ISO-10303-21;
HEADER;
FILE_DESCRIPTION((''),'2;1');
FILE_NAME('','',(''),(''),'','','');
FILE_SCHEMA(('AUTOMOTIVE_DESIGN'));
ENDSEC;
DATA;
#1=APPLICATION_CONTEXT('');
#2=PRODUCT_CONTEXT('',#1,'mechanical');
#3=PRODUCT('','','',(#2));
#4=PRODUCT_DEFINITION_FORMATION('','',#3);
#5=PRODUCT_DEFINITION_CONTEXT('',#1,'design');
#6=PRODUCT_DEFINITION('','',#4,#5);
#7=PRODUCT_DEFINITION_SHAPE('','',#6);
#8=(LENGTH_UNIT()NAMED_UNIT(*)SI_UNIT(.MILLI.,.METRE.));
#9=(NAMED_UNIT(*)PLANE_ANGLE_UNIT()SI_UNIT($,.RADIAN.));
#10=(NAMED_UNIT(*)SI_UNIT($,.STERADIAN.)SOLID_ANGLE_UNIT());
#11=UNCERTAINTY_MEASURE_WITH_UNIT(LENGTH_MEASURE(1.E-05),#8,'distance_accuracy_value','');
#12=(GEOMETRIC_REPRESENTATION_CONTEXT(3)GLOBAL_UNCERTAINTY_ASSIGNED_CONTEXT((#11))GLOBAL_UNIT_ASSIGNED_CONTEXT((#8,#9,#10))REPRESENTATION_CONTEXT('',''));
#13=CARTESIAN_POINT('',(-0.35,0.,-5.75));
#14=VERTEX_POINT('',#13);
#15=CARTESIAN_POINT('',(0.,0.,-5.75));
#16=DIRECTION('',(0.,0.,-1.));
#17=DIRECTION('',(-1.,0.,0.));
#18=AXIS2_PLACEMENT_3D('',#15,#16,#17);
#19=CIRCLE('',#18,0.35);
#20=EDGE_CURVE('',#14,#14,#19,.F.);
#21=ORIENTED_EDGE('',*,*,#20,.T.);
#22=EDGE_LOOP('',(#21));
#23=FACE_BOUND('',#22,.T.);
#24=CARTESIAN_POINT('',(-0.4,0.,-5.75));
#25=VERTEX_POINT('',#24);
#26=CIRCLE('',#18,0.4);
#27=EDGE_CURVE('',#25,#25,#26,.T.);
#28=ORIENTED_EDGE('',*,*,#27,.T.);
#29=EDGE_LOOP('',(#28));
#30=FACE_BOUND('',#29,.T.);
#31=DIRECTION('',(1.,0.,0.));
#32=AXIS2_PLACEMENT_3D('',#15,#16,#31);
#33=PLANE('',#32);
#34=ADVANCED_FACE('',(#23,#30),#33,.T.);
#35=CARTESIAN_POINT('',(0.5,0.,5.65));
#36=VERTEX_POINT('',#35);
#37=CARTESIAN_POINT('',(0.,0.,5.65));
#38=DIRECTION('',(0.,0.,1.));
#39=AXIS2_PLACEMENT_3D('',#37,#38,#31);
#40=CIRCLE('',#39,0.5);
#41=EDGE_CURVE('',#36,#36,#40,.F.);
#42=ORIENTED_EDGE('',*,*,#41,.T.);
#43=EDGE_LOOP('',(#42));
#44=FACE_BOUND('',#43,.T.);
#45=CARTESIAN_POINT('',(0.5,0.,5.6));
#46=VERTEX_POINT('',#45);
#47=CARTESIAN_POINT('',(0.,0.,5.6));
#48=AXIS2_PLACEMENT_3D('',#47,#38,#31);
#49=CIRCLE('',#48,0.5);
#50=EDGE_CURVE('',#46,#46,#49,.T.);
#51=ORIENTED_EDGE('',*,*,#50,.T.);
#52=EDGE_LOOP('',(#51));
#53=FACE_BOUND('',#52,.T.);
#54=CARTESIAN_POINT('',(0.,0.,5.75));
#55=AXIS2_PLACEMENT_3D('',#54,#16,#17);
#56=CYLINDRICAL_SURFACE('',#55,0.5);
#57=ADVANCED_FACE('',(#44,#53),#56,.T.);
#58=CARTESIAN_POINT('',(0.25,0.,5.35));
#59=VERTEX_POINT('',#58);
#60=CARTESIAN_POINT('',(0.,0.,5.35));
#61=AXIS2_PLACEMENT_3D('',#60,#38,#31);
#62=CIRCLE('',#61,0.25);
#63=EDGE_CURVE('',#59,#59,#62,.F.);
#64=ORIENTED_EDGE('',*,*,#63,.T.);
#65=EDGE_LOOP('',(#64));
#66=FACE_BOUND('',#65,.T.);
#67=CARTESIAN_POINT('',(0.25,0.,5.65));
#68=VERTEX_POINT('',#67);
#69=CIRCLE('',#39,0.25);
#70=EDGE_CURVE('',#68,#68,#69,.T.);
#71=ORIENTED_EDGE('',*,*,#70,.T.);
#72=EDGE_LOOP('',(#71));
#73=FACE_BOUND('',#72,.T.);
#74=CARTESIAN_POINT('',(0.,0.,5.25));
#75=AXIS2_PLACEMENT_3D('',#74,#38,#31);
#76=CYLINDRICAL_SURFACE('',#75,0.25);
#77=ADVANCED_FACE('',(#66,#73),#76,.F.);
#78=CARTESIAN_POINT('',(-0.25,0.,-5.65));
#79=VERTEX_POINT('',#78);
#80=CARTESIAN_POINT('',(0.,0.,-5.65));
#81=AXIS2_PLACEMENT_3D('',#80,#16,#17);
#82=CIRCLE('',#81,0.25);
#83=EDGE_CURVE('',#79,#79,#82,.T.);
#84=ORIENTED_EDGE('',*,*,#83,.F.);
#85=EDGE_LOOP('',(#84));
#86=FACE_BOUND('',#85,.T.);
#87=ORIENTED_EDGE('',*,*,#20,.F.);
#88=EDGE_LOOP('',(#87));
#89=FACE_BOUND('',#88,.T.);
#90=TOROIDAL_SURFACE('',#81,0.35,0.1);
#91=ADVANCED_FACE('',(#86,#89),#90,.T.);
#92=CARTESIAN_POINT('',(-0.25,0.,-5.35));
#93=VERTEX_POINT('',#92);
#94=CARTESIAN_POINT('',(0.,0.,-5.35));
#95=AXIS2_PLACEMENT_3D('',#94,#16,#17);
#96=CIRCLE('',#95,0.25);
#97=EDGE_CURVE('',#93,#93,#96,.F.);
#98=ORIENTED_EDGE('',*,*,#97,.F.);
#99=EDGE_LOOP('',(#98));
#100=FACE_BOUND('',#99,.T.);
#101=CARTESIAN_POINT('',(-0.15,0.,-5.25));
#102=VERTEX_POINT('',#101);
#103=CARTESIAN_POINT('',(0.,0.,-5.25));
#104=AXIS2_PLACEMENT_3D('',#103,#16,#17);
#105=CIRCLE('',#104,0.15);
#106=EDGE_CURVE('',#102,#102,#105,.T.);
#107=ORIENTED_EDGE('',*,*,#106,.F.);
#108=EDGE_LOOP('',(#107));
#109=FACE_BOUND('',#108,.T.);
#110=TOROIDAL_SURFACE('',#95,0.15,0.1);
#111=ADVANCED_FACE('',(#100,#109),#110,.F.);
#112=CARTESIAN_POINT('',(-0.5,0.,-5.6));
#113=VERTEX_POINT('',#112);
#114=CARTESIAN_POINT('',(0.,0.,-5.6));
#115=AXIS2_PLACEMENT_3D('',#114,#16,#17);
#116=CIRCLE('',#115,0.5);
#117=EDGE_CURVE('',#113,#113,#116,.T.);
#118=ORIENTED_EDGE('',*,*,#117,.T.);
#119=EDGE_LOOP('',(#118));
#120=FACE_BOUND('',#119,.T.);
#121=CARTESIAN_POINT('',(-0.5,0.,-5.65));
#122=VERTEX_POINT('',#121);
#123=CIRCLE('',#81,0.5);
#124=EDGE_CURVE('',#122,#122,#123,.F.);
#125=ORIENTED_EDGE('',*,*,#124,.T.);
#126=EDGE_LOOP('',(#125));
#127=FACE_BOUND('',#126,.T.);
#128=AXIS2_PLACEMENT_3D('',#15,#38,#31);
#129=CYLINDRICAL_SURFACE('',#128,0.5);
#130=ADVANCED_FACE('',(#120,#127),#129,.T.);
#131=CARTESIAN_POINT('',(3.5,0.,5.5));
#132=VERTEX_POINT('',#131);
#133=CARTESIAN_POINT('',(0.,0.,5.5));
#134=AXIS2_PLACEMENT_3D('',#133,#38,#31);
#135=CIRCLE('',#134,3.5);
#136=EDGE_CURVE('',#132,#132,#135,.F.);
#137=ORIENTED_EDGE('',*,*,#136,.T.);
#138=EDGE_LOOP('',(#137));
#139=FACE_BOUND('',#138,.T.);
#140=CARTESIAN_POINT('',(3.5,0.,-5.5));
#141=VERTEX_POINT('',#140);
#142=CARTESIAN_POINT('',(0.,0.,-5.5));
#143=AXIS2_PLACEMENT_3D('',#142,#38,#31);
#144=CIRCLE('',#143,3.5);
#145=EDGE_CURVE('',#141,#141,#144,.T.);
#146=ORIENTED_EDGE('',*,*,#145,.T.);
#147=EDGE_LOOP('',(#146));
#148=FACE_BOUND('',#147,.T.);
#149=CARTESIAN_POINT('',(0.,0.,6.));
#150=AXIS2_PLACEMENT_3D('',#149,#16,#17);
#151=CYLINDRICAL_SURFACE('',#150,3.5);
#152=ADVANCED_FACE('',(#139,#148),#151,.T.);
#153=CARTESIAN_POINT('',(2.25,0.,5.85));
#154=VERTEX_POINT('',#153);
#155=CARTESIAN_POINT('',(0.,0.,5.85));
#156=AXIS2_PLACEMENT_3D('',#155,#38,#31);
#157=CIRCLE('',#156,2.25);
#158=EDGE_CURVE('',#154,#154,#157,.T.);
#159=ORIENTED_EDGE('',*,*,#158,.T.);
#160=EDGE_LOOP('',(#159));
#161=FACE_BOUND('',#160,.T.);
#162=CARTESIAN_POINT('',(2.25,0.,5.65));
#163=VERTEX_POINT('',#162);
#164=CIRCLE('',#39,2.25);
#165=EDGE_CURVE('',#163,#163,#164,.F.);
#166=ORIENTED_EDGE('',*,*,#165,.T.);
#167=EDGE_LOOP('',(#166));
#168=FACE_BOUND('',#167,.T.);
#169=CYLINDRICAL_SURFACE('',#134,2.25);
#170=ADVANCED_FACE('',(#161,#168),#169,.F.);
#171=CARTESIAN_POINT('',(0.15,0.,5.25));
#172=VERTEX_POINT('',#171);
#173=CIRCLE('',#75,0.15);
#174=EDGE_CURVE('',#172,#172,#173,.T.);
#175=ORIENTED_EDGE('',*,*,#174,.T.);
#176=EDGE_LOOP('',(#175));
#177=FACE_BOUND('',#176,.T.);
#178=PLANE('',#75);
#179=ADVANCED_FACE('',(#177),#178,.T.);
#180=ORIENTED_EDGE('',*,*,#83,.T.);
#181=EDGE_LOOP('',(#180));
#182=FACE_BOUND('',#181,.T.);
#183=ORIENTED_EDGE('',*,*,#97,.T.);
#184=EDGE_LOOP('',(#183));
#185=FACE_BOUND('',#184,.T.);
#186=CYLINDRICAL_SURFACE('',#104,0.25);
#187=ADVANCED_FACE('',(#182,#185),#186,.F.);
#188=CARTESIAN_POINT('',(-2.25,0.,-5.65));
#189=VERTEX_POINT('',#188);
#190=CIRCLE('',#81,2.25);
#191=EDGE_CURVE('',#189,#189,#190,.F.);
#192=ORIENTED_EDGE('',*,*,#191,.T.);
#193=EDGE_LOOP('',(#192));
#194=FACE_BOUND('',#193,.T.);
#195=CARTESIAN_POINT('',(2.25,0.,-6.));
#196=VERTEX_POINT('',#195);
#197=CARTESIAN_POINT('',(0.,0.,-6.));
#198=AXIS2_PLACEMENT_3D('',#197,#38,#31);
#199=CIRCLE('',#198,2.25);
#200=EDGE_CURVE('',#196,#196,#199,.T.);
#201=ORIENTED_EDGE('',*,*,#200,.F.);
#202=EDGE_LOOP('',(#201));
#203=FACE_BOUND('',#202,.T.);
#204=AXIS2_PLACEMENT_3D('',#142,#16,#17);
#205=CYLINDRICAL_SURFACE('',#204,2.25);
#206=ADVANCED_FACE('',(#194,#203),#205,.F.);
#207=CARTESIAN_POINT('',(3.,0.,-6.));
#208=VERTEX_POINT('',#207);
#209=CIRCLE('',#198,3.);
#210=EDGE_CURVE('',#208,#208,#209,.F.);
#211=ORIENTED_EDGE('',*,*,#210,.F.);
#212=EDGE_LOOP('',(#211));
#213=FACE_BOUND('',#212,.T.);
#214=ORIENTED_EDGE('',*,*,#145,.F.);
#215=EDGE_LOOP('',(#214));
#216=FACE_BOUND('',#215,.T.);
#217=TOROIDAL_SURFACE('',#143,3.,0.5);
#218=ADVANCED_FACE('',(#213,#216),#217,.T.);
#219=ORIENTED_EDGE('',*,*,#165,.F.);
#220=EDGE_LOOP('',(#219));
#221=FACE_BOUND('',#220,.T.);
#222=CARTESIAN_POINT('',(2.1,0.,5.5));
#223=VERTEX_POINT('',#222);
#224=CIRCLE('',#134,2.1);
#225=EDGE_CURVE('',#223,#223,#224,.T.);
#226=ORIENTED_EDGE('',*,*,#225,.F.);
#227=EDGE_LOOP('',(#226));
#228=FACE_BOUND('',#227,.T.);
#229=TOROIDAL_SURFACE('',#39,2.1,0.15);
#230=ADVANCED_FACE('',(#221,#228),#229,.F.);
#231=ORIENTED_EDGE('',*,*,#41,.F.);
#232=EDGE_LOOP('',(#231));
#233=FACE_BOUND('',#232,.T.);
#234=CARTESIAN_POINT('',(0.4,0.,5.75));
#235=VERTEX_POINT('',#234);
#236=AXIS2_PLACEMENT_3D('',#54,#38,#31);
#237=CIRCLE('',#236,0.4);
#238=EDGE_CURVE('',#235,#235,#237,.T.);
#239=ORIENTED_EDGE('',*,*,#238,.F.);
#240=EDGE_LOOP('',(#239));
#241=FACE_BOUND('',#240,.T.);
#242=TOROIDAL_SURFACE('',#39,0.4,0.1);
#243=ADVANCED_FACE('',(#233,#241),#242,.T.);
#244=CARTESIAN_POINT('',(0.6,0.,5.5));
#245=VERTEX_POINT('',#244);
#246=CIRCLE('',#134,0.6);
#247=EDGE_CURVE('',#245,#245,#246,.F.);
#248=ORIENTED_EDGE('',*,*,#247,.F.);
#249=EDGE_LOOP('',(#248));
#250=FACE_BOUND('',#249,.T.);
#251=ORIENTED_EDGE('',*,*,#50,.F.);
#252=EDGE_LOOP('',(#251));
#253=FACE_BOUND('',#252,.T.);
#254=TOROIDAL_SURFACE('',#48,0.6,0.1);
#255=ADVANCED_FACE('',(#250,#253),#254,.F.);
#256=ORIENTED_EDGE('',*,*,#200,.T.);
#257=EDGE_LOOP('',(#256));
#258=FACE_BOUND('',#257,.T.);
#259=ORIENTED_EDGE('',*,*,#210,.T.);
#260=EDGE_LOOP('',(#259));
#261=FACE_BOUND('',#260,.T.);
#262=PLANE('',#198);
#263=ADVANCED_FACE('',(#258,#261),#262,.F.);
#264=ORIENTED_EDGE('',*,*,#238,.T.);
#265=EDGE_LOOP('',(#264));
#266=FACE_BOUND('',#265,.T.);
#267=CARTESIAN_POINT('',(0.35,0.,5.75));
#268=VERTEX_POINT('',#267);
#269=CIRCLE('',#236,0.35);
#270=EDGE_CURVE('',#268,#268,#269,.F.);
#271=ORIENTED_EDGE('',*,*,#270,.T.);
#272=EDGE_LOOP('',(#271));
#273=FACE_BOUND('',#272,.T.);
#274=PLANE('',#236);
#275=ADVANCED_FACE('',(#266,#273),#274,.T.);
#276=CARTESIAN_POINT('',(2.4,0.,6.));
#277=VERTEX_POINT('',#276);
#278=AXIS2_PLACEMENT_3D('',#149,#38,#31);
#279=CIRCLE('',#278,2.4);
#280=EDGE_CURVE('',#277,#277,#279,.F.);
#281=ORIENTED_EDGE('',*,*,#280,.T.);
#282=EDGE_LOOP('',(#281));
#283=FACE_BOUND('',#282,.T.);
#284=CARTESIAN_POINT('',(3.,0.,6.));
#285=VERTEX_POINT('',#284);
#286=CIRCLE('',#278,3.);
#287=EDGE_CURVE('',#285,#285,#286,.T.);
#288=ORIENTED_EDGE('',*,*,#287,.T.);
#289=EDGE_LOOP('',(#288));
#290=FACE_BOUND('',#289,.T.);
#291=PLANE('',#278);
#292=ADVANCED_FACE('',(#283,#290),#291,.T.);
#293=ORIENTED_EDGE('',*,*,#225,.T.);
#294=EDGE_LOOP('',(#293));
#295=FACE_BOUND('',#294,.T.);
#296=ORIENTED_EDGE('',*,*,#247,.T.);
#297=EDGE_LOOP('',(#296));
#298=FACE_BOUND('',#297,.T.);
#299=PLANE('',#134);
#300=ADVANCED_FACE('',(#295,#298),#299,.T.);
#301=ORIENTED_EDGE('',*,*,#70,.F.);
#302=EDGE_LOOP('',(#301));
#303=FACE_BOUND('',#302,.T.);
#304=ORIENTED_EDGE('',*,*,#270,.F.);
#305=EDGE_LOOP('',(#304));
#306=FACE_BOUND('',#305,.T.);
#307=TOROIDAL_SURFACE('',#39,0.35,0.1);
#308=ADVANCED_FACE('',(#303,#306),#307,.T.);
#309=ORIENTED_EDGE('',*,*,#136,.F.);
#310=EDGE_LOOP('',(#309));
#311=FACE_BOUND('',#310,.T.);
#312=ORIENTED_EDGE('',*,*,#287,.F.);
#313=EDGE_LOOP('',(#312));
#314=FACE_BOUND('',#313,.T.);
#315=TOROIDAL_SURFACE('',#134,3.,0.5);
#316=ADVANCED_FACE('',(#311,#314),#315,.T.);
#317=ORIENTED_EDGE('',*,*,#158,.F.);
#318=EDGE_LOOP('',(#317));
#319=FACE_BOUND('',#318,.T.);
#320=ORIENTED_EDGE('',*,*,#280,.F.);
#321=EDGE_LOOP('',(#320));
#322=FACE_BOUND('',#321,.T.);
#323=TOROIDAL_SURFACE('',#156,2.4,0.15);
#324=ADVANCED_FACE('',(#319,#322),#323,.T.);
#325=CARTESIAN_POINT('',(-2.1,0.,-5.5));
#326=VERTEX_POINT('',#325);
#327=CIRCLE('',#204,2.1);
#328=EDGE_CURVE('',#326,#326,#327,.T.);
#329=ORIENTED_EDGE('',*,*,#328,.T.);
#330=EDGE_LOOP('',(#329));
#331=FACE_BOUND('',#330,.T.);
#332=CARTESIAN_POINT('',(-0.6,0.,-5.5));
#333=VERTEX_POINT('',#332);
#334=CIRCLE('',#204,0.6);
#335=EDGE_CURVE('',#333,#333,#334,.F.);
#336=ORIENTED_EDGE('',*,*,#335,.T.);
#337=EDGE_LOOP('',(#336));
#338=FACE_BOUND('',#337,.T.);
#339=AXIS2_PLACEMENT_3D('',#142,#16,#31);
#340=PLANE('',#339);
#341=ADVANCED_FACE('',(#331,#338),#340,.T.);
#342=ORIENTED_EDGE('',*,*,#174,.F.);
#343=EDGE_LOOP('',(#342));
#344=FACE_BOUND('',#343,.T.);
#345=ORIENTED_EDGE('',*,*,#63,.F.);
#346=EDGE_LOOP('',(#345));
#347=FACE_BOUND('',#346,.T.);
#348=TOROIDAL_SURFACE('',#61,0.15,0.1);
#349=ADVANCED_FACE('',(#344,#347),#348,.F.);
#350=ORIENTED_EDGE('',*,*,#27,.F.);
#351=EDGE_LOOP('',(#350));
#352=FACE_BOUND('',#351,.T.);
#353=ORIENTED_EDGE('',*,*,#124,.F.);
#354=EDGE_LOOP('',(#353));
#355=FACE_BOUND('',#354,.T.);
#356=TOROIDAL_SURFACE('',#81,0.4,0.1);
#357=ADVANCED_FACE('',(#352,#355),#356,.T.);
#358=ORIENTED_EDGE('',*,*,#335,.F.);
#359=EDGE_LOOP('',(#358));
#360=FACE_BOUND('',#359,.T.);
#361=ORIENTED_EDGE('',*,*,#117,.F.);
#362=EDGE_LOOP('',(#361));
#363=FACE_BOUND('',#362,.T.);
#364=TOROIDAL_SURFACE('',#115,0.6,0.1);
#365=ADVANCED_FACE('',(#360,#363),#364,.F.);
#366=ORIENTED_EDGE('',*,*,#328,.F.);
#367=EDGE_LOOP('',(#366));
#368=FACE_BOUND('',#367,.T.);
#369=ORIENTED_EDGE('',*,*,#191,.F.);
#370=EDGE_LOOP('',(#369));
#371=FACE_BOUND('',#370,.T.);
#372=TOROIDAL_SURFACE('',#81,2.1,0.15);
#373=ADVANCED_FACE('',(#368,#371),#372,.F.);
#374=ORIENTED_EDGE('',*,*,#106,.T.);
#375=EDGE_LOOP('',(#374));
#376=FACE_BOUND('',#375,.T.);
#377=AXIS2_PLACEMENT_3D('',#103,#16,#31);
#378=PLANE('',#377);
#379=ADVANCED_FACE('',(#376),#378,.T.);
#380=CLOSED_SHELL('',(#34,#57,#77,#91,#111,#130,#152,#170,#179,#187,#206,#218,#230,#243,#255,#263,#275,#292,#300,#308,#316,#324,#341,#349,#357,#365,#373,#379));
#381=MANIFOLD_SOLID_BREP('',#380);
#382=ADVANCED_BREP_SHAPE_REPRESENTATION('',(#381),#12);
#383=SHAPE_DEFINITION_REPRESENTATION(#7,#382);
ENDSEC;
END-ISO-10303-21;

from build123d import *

# Parameters (mm, degrees)
SKETCH1_R           = 3.5
BOSS_EXTRUDE1_DEPTH = 6
FILLET1_R           = 0.5
SKETCH2_R           = 2.25
CUT_EXTRUDE1_DEPTH  = 0.5
SKETCH3_R           = 0.5
BOSS_EXTRUDE2_DEPTH = 0.25
SKETCH4_R           = 0.25
CUT_EXTRUDE2_DEPTH  = 0.5
FILLET2_R           = 0.15
FILLET3_R           = 0.1


# Read off the part's stored shape, not the designer's step: Mirror1
with BuildPart() as part:
    # Sketch1 → Boss-Extrude1 (new, symmetric)
    with BuildSketch(Plane.XY):
        Circle(SKETCH1_R)
    extrude(amount=BOSS_EXTRUDE1_DEPTH, both=True)

    # Fillet1
    fillet1_edges = [part.edges().sort_by_distance(p)[0] for p in [
        (-3.5, 0, -6),
        (-3.5, 0, 6),
    ]]
    fillet(fillet1_edges, radius=FILLET1_R)

    # Sketch2 → Cut-Extrude1 (cut)
    with BuildSketch(Plane.XY.offset(6)):
        Circle(SKETCH2_R)
    extrude(amount=-CUT_EXTRUDE1_DEPTH, mode=Mode.SUBTRACT)

    # Sketch3 → Boss-Extrude2 (add, symmetric)
    with BuildSketch(Plane.XY.offset(5.5)):
        Circle(SKETCH3_R)
    extrude(amount=BOSS_EXTRUDE2_DEPTH, both=True)

    # Sketch4 → Cut-Extrude2 (cut)
    with BuildSketch(Plane.XY.offset(5.75)):
        Circle(SKETCH4_R)
    extrude(amount=-CUT_EXTRUDE2_DEPTH, mode=Mode.SUBTRACT)

    # Fillet2
    fillet2_edges = [part.edges().sort_by_distance(p)[0] for p in [
        (-2.25, 0, 5.5),
        (-2.25, 0, 6),
    ]]
    fillet(fillet2_edges, radius=FILLET2_R)

    # Fillet3
    fillet3_edges = [part.edges().sort_by_distance(p)[0] for p in [
        (-0.5, 0, 5.5),
        (-0.5, 0, 5.75),
        (-0.25, 0, 5.25),
        (-0.25, 0, 5.75),
    ]]
    fillet(fillet3_edges, radius=FILLET3_R)

    # Mirror1 outline → Mirror1 (revolve, cut)
    with BuildSketch(Plane.XZ):
        with BuildLine():
            Line((2.25, -6), (2.25, -5.65))
            ThreePointArc((2.25, -5.65), (2.206066017, -5.543933983), (2.1, -5.5))
            Line((2.1, -5.5), (0.6, -5.5))
            ThreePointArc((0.6, -5.5), (0.529289322, -5.529289322), (0.5, -5.6))
            Line((0.5, -5.6), (0.5, -5.65))
            ThreePointArc((0.5, -5.65), (0.470710678, -5.720710678), (0.4, -5.75))
            Line((0.4, -5.75), (0.35, -5.75))
            ThreePointArc((0.35, -5.75), (0.279289322, -5.720710678), (0.25, -5.65))
            Line((0.25, -5.65), (0.25, -5.35))
            ThreePointArc((0.25, -5.35), (0.220710678, -5.279289322), (0.15, -5.25))
            Line((0.15, -5.25), (0, -5.25))
            Line((0, -5.25), (0, -6))
            Line((0, -6), (2.25, -6))
        make_face()
    revolve(axis=Axis((0, 0, 0), (0, 0, 1)), mode=Mode.SUBTRACT)


solid = part.part
